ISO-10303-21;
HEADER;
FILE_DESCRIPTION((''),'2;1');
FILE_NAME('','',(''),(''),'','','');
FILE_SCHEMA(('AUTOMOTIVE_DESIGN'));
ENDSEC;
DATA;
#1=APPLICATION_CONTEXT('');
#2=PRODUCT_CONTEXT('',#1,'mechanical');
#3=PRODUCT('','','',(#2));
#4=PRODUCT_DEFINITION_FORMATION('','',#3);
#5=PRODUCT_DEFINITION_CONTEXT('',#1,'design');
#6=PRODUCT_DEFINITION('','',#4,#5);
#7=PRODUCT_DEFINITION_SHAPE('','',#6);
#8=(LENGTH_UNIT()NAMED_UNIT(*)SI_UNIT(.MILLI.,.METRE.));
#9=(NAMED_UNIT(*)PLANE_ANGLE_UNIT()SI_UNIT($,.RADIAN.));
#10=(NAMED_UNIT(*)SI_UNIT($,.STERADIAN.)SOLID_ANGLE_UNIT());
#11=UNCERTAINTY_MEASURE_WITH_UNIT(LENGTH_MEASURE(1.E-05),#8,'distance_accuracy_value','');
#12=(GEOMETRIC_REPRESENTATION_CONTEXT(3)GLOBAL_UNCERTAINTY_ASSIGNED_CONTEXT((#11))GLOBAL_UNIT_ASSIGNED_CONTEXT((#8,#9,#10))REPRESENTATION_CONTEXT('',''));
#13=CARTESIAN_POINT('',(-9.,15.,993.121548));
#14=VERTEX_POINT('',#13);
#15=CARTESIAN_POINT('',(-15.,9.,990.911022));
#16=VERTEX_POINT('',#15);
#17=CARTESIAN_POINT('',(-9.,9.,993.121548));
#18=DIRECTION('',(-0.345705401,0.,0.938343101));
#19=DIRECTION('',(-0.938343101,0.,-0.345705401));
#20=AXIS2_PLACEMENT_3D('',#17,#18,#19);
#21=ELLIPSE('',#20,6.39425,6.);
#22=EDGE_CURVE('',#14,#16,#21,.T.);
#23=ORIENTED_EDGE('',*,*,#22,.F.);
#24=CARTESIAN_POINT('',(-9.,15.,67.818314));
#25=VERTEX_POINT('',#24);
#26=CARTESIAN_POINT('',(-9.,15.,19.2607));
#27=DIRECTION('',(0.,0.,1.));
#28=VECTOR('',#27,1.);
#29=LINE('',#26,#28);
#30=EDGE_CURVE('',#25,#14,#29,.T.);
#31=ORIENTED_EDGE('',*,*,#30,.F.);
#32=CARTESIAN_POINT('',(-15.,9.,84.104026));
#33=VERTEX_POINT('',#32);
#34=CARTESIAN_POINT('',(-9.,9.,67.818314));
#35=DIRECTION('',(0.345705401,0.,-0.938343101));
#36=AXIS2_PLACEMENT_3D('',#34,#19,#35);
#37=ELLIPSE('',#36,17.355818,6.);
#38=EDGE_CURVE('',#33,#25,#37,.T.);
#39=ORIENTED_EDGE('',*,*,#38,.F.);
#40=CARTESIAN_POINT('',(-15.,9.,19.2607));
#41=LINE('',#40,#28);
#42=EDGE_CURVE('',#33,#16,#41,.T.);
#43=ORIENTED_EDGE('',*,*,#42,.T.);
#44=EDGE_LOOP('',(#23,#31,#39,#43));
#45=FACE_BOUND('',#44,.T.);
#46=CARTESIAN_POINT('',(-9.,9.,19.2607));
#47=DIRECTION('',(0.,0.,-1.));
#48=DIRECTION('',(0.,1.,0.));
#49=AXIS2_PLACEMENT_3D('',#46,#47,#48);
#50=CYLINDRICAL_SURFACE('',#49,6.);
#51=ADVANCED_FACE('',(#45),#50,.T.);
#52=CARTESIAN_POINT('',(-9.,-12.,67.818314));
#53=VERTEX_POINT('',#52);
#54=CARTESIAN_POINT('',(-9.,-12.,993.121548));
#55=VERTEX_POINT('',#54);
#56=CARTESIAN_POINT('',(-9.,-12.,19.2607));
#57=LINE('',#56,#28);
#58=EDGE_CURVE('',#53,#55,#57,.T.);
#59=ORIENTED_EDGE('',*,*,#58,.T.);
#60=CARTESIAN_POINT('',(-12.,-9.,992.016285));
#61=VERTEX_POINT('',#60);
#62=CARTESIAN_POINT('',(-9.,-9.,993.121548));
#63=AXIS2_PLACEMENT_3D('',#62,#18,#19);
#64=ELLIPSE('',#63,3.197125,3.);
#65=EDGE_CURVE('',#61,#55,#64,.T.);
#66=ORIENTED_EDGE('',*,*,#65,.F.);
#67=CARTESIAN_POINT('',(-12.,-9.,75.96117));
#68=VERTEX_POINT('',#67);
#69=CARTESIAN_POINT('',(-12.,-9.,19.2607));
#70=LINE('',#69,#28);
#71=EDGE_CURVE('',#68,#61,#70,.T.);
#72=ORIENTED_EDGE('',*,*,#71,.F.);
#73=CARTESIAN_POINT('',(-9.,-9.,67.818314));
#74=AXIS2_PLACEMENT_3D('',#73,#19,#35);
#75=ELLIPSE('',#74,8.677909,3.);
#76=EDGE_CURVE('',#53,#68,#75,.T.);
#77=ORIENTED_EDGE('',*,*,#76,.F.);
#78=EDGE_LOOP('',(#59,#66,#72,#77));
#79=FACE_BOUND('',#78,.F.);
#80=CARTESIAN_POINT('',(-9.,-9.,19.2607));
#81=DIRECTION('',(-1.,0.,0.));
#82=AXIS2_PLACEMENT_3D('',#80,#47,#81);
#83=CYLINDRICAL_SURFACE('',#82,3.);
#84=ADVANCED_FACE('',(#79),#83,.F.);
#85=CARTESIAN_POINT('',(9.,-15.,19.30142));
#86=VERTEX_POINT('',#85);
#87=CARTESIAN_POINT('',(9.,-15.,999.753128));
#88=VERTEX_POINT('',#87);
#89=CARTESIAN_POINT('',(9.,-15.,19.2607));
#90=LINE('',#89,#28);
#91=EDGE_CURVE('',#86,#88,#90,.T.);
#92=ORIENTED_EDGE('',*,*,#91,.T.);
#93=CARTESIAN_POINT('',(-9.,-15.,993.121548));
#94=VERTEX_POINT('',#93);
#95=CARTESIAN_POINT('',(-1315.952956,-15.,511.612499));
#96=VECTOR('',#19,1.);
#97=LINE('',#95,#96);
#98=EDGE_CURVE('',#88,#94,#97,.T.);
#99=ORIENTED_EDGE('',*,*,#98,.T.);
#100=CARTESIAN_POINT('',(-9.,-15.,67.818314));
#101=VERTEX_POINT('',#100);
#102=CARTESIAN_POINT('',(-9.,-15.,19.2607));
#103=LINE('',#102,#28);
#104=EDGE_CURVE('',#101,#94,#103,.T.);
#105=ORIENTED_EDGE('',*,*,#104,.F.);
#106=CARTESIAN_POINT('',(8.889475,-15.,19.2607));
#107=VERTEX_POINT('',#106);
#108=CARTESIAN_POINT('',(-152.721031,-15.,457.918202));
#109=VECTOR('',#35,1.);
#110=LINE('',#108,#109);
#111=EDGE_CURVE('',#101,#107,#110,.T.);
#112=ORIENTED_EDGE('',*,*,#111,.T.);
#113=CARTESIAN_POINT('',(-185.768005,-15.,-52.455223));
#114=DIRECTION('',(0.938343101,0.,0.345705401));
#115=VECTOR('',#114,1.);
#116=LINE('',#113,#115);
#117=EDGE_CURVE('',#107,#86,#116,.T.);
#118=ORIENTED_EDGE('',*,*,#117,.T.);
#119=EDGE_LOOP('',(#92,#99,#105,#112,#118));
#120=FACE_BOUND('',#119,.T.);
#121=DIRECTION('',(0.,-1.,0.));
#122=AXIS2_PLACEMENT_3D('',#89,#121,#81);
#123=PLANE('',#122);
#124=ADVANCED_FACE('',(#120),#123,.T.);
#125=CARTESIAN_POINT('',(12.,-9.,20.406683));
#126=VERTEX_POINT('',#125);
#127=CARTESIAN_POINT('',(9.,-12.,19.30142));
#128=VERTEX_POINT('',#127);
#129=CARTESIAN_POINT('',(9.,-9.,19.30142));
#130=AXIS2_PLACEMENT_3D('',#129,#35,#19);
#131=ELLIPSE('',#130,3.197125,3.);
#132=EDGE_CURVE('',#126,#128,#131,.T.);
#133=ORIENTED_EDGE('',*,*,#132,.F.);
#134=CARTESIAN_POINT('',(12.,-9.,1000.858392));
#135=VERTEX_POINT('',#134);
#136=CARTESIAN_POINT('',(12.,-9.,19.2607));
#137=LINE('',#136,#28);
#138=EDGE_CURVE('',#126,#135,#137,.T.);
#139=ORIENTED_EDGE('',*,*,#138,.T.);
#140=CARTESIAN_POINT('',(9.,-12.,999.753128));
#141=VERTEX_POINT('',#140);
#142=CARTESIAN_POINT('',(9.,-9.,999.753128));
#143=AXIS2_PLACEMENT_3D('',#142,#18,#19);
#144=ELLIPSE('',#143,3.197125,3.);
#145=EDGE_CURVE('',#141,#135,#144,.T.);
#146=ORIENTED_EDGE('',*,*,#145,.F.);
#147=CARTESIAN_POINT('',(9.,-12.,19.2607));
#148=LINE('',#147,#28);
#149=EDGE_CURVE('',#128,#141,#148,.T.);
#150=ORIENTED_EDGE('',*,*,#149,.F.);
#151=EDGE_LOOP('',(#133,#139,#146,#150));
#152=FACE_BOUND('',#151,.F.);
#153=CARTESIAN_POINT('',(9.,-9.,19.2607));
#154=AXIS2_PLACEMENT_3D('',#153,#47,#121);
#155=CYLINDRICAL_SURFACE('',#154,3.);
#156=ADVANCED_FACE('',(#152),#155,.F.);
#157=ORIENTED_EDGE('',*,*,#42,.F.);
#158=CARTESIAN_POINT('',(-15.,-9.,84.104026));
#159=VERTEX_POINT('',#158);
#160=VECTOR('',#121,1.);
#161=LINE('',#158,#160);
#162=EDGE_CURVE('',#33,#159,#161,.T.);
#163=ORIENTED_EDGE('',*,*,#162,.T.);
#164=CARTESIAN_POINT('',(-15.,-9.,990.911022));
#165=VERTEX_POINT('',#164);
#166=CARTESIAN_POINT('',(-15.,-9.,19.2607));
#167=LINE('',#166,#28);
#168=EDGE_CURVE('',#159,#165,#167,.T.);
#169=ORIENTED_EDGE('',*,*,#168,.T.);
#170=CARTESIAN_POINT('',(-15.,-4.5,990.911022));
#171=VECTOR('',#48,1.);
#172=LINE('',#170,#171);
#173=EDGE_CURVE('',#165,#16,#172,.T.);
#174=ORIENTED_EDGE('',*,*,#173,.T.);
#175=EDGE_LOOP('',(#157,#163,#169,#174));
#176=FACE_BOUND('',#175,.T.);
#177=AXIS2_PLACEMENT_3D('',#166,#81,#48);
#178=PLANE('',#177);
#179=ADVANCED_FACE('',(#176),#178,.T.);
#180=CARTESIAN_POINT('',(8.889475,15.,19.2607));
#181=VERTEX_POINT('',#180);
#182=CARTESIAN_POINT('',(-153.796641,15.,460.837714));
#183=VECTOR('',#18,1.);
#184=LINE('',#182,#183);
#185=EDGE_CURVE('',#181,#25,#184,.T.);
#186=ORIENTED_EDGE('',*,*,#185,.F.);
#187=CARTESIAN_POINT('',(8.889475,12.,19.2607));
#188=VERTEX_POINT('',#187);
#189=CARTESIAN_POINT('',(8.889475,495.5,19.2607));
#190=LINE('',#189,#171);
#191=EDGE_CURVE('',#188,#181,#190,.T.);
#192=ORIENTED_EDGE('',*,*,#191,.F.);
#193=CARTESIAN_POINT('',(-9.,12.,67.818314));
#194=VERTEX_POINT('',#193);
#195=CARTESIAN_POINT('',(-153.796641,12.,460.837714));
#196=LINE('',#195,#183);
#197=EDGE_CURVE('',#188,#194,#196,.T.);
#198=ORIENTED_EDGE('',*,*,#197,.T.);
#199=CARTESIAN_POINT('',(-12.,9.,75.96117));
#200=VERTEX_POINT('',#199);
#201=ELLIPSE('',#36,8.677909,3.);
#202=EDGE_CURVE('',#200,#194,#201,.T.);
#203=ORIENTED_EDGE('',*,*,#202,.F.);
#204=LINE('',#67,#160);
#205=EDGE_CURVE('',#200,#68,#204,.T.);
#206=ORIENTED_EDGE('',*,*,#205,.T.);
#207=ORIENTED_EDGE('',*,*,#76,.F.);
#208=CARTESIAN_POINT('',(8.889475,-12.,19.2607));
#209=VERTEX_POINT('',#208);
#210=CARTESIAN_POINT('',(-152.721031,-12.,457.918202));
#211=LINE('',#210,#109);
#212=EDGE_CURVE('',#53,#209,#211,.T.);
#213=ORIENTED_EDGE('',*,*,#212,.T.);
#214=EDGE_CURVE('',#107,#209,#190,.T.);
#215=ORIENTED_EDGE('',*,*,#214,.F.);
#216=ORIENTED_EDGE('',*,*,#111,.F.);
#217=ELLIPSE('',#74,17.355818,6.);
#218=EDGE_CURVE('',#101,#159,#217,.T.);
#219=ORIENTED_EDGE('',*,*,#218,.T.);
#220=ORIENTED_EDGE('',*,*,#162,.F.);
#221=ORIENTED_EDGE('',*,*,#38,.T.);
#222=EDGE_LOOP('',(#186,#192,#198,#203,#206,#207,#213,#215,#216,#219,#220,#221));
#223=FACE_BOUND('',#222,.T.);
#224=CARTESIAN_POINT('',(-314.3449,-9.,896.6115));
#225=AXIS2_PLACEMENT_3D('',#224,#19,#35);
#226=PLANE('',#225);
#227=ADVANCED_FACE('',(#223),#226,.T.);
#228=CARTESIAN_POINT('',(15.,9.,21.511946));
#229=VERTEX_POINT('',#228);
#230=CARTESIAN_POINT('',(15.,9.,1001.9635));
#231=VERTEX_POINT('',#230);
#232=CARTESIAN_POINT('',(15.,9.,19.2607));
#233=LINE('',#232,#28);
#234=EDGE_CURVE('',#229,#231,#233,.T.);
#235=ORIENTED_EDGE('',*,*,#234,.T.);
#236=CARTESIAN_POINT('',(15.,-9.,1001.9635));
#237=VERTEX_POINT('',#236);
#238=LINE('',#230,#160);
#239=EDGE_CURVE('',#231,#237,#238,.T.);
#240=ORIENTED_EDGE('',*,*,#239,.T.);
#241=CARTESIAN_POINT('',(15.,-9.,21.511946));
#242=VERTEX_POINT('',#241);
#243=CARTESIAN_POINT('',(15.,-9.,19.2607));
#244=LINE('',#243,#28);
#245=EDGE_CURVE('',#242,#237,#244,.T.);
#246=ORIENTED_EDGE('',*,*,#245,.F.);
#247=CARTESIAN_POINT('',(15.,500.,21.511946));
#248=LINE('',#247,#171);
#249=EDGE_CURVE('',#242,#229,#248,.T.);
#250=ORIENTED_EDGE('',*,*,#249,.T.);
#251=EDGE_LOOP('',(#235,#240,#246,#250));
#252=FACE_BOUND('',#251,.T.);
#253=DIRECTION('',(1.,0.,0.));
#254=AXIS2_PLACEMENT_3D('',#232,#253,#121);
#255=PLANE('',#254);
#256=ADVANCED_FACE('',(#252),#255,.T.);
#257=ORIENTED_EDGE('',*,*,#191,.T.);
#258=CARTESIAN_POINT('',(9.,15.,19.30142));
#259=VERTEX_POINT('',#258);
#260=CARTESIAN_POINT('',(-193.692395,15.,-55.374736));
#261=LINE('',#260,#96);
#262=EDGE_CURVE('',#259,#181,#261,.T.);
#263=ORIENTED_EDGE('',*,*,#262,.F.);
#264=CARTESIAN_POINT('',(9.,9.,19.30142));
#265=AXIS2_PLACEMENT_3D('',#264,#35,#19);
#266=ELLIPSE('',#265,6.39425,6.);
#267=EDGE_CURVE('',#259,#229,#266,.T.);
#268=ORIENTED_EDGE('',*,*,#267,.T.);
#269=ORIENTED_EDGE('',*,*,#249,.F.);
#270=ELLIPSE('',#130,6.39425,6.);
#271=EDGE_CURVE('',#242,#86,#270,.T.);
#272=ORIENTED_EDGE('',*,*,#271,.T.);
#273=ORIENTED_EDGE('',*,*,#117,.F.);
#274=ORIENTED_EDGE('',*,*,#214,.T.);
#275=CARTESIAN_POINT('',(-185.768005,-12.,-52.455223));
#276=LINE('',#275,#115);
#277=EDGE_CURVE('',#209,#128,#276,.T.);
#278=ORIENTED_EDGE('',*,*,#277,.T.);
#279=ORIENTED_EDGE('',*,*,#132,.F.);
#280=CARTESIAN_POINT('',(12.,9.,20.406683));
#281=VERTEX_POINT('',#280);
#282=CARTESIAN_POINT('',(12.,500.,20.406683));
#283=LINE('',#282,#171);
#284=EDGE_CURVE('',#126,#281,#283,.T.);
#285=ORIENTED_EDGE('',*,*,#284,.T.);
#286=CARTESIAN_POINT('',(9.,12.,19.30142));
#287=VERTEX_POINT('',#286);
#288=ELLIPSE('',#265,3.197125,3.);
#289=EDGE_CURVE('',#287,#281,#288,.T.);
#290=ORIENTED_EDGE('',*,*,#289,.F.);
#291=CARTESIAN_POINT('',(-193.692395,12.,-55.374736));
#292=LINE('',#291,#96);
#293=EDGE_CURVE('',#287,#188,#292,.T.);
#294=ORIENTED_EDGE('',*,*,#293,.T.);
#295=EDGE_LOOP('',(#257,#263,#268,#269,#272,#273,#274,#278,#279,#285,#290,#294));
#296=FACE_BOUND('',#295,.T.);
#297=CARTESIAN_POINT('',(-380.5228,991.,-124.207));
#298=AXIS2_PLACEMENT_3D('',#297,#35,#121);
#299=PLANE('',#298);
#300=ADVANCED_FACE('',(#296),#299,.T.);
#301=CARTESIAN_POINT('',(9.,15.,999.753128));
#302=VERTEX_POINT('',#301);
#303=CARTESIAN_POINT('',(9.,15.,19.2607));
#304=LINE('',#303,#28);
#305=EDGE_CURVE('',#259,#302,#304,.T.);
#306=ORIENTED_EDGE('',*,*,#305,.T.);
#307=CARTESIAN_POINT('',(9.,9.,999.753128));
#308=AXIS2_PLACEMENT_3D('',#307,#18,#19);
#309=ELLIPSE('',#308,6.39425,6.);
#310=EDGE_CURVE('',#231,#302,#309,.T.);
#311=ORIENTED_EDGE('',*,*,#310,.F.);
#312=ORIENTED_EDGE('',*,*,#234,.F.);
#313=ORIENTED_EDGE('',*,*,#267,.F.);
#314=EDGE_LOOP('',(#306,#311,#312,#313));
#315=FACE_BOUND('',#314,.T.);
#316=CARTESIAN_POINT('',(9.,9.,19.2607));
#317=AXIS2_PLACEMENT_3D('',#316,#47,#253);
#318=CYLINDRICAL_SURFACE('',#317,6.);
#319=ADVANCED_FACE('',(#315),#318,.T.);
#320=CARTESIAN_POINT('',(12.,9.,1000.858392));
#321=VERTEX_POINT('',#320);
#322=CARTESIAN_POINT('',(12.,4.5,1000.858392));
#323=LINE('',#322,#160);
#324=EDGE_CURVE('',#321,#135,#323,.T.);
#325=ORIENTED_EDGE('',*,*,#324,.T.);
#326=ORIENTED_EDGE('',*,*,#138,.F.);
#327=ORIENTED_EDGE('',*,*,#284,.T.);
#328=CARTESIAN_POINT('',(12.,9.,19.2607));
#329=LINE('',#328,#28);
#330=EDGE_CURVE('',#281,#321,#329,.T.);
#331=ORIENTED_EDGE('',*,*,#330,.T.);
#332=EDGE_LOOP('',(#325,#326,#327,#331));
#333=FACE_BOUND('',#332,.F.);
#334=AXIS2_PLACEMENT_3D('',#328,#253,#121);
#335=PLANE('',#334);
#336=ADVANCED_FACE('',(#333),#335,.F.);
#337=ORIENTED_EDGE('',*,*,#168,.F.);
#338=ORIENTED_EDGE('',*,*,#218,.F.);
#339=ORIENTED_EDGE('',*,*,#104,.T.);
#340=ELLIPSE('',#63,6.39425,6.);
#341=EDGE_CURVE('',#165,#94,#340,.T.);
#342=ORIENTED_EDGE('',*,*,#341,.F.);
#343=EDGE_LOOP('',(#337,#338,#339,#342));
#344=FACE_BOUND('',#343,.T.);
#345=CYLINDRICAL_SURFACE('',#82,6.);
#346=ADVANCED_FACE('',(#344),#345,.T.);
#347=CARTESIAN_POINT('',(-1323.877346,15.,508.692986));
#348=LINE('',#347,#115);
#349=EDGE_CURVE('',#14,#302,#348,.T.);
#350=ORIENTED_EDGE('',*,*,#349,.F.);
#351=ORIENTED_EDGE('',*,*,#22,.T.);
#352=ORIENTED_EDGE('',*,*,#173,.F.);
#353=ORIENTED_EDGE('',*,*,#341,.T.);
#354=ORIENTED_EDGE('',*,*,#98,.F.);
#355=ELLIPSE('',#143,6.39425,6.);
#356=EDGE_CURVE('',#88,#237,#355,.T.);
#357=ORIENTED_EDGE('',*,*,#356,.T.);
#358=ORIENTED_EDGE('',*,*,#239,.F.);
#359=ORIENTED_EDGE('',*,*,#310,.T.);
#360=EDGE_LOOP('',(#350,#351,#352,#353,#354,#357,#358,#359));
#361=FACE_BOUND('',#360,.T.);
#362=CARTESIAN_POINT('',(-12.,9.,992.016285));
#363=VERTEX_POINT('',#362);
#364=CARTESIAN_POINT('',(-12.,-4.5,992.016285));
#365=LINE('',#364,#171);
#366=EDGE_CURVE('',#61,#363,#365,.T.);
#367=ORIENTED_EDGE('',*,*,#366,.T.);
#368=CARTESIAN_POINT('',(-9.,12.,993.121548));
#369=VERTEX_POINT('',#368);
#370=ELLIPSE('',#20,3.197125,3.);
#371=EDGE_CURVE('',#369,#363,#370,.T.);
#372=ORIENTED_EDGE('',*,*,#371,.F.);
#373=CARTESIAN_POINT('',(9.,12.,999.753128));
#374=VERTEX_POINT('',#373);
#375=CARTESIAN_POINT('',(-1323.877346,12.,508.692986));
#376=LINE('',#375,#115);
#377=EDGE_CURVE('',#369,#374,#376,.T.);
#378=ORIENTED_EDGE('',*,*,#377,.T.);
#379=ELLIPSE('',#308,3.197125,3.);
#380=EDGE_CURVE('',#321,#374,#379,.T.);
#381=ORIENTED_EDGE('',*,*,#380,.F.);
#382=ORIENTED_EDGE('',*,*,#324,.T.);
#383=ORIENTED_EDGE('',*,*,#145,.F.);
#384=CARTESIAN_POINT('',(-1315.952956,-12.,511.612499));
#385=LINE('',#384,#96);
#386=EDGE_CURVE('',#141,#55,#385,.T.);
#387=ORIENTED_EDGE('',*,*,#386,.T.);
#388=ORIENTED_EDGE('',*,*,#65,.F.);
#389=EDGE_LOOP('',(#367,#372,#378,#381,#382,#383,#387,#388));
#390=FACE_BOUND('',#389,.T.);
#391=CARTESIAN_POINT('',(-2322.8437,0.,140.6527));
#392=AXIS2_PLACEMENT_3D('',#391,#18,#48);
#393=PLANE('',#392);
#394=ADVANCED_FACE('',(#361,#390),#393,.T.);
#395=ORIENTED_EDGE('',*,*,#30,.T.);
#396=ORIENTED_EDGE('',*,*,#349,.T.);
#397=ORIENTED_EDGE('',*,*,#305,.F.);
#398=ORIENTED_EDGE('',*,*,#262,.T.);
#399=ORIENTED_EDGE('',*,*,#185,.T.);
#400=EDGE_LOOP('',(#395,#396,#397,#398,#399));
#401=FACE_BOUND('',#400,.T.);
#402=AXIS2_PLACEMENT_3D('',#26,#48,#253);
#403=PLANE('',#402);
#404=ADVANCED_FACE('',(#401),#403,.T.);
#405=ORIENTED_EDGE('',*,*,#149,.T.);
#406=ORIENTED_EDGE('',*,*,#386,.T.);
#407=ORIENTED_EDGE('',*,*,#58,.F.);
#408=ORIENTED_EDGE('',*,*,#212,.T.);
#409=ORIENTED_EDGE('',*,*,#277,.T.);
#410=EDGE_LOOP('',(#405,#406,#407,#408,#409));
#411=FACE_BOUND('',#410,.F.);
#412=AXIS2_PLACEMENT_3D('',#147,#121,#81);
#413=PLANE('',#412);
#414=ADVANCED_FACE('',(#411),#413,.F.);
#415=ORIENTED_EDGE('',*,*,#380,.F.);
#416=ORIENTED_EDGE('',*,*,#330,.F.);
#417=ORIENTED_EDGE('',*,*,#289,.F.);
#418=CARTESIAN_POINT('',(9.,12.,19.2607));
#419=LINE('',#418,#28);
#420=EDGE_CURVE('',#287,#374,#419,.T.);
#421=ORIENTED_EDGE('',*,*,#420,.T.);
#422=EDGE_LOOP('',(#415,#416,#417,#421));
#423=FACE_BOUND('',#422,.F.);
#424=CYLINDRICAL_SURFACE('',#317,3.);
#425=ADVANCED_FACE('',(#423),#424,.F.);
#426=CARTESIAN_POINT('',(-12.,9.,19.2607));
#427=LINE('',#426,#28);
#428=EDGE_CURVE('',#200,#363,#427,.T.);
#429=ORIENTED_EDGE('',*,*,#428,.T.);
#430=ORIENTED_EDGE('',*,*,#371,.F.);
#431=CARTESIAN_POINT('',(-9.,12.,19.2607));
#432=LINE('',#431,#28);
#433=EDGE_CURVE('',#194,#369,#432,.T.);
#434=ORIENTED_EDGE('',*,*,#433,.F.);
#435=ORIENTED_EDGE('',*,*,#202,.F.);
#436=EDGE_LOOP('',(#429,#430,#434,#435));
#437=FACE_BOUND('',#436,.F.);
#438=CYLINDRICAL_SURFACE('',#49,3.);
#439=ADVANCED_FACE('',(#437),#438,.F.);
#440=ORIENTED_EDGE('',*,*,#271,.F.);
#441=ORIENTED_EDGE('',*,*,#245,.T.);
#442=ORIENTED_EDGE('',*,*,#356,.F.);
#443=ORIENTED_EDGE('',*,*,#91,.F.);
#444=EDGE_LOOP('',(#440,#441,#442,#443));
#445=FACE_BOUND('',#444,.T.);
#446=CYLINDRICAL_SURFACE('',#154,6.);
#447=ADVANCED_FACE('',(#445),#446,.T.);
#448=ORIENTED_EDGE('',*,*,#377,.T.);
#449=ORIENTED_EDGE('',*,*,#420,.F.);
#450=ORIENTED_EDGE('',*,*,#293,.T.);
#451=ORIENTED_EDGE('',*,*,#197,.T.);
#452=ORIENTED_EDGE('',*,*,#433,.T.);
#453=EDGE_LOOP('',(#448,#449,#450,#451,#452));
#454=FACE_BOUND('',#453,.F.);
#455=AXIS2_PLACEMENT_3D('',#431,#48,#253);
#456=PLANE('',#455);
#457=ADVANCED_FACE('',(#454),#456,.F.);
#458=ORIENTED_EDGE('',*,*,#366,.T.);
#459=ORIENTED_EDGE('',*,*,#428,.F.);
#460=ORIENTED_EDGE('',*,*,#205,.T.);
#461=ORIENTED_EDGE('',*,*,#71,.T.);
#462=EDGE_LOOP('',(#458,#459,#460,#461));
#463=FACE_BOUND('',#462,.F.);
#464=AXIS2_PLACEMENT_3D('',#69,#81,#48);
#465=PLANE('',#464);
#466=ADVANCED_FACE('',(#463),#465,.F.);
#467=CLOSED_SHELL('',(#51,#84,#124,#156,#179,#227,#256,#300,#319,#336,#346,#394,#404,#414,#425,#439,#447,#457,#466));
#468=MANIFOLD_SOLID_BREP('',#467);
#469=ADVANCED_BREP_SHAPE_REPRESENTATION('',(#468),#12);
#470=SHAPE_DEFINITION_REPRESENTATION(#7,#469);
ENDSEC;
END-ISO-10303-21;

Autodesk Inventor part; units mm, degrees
ref_plane "Start Plane" through (0, 0, 19.2607) normal (0, 0, 1) x (1, 0, 0)
ref_plane "End Plane" through (0, 0, 1001.9635) normal (0, 0, 1) x (1, 0, 0)
sketch "Sketch" plane through (0, 0, 0) normal (0, 0, 1) x (1, 0, 0)
  line L0 (-15, -9) -> (-15, 9)
  line L1 (-9, 15) -> (9, 15)
  line L2 (15, 9) -> (15, -9)
  line L3 (9, -15) -> (-9, -15)
  arc A0 (-15, -9) -> (-9, -15) centre (-9, -9) ccw
  arc A1 (-9, 15) -> (-15, 9) centre (-9, 9) ccw
  arc A2 (15, 9) -> (9, 15) centre (9, 9) ccw
  arc A3 (9, -15) -> (15, -9) centre (9, -9) ccw
  arc A4 (-9, 12) -> (-12, 9) centre (-9, 9) ccw
  line L4 (-9, 12) -> (9, 12)
  arc A5 (12, 9) -> (9, 12) centre (9, 9) ccw
  line L5 (12, 9) -> (12, -9)
  arc A6 (9, -12) -> (12, -9) centre (9, -9) ccw
  line L6 (9, -12) -> (-9, -12)
  arc A7 (-12, -9) -> (-9, -12) centre (-9, -9) ccw
  line L7 (-12, -9) -> (-12, 9)
  line L8 (0, 22.7397) -> (0, -22.7397) construction
  line L9 (-22.7397, 0) -> (22.7397, 0) construction
  dimension "d7" = 6
  dimension "d10" = 30
  dimension "d11" = 30
  dimension "d12" = 3
  dimension "d15" = 15
  dimension "d16" = 15
extrude "Body" add sketch "Sketch" along normal up to surface (982.7028 mm away) from surface at 19.2607
sketch "Sketch3" plane through (0, 0, 0) normal (0, 0, 1) x (1, 0, 0)
  line L0 (0, 0) -> (10, 0)
ref_plane "Work Plane3" through (0, 0, 0) normal (0, -1, 0) x (1, 0, 0)
ref_plane "Work Plane4" through (-2322.8437, 0, 140.6527) normal (-0.3457054, 0, 0.9383431) x (0.9383431, 0, 0.3457054)
split "Split1" plane through (-2322.8437, 0, 140.6527) removes the side toward (-0.3457054, 0, 0.9383431)
ref_plane "Work Plane5" through (-380.5228, 991, -124.207) normal (0.3457054, 0, -0.9383431) x (-0.9383431, 0, -0.3457054)
split "Split2" plane through (-380.5228, 991, -124.207) removes the side toward (0.3457054, 0, -0.9383431)
ref_plane "Work Plane6" through (-314.3449, -9, 896.6115) normal (-0.9383431, 0, -0.3457054) x (-0.3457054, 0, 0.9383431)
split "Split3" plane through (-314.3449, -9, 896.6115) removes the side toward (-0.9383431, 0, -0.3457054)
sketch "Sketch4" plane through (0, 0, 0) normal (0, -1, 0) x (1, 0, 0)
  line L0 (-2, 19.2607) -> (12, 19.2607) projected
  line L1 (-2, 1001.9635) -> (12, 1001.9635) projected
  dimension "d18" = 982.7028
equation "\"d7\" = G_IR"
equation "\"d10\" = G_H"
equation "\"d11\" = G_W"
equation "\"d12\" = G_T"
equation "\"d15\" = 0.5 * d10"
equation "\"d16\" = 0.5 * d11"
equation "\"d3\" = G_L"
equation "\"G_W\" = 30"
equation "\"G_H\" = 30"
equation "\"G_T\" = 3"
equation "\"G_IR\" = 6"
equation "\"G_L\" = d18"
equation "\"G_OFFSET_START\" = -19.26073"
equation "\"G_OFFSET_END\" = -10.45931"
equation "\"d13\" = -G_OFFSET_START"
equation "\"d14\" = G_OFFSET_END + B_L"
equation "\"B_L\" = 1012.42284"
properties part number "DIN EN 10219-2 - 30 x 30 x 3  - 982.7" material "Steel, Mild"
